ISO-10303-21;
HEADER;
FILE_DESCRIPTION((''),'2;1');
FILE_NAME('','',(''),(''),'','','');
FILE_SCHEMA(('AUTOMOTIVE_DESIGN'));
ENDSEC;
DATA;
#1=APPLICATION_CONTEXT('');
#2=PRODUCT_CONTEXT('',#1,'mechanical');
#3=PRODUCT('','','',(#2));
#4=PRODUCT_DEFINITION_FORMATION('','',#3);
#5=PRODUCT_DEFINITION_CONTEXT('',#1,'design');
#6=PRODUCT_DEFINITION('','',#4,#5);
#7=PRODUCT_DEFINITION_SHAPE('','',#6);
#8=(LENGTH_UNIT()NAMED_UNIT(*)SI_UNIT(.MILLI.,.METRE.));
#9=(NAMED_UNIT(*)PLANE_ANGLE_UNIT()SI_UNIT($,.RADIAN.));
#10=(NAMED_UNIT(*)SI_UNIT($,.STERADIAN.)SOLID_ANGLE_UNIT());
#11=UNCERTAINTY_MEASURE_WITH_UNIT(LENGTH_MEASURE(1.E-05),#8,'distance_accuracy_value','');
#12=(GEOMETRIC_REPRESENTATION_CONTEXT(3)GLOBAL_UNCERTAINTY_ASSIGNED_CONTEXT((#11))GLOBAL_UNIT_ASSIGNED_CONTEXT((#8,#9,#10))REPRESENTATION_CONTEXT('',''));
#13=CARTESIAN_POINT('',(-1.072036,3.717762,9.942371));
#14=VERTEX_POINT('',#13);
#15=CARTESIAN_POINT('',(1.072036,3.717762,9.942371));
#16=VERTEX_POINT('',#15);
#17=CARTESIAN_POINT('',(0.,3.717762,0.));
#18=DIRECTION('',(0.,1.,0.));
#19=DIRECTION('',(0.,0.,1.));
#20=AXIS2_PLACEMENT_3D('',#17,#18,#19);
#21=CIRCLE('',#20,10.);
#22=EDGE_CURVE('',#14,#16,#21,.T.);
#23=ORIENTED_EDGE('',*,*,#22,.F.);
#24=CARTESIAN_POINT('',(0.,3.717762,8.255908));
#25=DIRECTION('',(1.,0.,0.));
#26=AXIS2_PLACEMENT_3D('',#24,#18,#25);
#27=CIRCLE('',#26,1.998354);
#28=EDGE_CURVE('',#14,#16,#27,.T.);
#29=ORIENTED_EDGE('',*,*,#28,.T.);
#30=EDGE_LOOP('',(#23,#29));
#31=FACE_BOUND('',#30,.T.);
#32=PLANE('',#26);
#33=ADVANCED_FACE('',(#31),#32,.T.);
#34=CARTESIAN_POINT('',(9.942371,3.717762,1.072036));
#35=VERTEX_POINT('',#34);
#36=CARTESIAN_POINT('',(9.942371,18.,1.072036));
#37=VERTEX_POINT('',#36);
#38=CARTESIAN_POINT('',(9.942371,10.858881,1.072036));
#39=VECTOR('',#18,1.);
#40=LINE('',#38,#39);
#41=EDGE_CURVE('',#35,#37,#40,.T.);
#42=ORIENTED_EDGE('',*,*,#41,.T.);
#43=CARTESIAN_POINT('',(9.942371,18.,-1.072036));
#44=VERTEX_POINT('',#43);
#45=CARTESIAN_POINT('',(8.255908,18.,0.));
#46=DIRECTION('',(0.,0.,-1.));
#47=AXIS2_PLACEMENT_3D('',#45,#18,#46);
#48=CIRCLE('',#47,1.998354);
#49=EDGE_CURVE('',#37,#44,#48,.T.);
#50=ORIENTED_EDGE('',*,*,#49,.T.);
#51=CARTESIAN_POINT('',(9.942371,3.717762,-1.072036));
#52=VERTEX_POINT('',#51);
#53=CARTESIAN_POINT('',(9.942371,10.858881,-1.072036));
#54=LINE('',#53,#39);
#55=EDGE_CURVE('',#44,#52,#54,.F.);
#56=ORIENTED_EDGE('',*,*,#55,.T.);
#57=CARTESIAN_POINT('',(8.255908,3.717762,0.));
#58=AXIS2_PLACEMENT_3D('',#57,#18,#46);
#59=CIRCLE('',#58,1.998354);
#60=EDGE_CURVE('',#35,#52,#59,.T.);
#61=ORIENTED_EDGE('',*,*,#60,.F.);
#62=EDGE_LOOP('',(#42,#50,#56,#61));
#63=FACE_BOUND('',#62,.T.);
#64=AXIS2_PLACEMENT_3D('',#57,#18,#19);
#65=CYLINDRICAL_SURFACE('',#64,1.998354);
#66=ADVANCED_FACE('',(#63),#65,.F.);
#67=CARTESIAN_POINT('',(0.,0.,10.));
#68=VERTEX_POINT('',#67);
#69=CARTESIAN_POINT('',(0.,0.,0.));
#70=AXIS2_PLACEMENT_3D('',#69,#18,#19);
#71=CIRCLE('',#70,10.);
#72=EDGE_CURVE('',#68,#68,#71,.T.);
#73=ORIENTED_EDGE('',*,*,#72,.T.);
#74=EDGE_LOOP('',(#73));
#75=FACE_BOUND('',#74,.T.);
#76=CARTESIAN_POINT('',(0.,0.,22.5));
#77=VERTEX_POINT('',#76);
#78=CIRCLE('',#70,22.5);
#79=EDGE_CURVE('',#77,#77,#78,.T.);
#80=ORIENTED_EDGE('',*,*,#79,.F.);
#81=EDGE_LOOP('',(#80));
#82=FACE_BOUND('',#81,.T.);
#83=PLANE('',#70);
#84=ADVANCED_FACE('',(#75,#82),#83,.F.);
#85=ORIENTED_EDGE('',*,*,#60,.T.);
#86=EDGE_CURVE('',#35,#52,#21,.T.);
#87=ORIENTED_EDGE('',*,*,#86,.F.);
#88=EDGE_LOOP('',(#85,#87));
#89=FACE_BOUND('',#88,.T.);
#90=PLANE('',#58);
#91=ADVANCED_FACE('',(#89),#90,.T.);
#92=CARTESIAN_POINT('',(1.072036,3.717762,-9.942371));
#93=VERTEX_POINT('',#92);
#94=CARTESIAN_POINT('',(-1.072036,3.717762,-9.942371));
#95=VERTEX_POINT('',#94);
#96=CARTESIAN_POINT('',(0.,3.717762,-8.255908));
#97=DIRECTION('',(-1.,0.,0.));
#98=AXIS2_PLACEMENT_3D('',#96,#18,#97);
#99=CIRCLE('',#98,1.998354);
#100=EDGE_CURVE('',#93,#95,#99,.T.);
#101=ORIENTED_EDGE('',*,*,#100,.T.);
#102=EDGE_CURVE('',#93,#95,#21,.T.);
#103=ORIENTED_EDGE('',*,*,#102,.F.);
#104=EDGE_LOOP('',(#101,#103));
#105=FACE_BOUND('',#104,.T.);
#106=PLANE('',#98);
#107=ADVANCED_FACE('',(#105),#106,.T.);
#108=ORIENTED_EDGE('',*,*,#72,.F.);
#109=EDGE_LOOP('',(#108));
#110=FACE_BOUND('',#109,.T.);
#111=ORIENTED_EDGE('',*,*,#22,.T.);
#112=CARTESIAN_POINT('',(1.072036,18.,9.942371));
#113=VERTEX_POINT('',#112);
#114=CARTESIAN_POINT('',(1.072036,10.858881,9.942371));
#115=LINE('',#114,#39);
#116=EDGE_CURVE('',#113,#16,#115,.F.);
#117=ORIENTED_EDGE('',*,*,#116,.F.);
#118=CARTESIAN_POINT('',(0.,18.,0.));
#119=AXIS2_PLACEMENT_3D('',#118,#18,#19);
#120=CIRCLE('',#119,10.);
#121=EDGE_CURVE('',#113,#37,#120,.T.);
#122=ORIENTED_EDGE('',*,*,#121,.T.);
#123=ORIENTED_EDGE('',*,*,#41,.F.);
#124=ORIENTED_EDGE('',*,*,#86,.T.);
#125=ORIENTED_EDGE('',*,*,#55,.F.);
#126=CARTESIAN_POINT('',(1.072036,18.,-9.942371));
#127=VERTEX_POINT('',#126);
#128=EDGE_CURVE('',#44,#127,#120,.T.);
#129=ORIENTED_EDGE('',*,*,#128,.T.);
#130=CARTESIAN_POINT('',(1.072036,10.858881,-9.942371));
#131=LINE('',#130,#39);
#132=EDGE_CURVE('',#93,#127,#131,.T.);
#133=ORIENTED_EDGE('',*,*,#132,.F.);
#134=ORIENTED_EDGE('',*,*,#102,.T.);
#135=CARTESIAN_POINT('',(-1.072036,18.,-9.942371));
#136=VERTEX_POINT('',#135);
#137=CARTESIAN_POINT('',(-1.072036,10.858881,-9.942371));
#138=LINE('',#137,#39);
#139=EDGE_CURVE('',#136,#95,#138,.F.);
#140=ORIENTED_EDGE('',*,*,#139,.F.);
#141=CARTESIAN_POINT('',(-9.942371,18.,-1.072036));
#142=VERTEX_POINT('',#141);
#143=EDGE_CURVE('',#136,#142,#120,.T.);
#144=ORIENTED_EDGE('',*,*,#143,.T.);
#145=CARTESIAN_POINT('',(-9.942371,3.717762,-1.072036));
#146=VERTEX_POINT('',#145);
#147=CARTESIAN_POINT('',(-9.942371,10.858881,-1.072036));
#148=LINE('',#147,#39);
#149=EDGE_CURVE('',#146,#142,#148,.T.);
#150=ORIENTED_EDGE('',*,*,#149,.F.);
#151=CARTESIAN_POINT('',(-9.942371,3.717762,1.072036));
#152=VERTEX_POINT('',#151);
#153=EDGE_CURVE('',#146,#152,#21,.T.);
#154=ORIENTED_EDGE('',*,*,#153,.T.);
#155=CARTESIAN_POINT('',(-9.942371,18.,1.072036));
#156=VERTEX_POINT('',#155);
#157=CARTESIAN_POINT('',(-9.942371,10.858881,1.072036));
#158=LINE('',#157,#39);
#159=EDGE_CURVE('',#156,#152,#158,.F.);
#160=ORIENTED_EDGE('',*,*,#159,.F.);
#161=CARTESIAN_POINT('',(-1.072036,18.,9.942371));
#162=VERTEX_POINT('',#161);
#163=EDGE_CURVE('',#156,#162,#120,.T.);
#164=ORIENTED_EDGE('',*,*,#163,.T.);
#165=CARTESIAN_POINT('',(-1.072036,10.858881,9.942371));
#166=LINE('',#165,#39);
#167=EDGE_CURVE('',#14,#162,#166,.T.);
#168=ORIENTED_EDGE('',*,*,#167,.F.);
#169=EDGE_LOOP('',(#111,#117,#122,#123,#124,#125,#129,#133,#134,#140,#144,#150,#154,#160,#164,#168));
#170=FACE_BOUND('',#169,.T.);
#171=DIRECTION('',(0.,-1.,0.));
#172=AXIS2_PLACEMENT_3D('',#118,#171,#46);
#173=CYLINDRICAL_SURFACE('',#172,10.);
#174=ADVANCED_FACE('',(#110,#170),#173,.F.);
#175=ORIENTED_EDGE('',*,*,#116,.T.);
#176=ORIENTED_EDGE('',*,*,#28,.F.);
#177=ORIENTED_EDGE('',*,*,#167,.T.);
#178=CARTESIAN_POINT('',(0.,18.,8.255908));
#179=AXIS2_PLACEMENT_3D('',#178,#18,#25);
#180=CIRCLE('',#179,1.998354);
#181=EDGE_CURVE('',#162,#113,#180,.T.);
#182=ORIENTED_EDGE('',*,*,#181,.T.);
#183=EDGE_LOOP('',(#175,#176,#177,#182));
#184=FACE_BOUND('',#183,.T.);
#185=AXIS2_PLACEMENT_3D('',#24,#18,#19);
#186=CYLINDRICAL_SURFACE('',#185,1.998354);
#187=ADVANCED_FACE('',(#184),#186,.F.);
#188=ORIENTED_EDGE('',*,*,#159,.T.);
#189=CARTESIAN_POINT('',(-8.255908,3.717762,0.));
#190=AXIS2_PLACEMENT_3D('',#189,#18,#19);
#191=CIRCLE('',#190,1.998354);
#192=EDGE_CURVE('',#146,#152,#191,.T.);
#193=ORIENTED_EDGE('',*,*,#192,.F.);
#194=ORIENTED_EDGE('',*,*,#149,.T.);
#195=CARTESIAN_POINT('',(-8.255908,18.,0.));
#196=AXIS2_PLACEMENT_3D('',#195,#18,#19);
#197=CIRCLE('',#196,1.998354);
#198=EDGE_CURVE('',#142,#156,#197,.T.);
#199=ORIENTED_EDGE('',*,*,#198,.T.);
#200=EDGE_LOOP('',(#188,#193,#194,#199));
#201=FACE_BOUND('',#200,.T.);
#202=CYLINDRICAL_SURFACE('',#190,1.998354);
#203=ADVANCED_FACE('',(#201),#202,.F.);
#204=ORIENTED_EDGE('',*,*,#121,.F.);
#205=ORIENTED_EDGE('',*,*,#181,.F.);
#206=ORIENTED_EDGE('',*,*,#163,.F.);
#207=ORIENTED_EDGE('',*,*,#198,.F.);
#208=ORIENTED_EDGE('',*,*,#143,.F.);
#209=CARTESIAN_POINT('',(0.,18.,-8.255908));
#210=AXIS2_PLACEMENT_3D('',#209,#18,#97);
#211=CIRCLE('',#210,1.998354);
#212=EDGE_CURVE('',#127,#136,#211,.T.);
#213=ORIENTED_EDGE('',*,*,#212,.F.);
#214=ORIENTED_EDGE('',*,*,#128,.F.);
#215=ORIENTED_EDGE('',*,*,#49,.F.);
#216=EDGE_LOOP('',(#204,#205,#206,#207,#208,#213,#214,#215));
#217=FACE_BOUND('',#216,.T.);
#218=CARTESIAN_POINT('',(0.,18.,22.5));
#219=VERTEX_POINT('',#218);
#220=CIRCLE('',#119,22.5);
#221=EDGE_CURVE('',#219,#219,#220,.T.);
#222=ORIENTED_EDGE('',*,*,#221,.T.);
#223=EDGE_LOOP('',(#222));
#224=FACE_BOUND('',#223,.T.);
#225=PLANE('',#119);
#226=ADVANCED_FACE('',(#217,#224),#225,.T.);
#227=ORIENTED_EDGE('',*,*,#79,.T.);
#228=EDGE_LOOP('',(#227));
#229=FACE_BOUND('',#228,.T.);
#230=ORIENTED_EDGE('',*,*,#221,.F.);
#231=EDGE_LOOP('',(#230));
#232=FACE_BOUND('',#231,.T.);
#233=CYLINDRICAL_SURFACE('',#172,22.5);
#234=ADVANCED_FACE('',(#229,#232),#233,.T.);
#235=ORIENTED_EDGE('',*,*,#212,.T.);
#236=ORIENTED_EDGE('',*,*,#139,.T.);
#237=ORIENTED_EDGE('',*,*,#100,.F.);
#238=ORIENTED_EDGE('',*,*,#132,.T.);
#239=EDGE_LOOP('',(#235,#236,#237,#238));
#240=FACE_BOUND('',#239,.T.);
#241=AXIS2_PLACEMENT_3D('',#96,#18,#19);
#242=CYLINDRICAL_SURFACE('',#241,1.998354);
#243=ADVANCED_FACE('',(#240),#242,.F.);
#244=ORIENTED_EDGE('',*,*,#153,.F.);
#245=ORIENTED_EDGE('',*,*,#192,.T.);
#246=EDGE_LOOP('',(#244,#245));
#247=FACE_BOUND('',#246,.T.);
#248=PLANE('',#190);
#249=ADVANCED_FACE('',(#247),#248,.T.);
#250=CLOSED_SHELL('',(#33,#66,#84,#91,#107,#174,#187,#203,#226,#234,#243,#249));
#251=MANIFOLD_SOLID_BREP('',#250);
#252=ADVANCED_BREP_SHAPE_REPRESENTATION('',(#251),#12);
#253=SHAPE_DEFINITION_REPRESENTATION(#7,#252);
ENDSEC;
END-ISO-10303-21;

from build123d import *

# Parameters (mm, degrees)
SKETCH1_R           = 22.5
BOSS_EXTRUDE1_DEPTH = 18
SKETCH2_R           = 10
CUT_EXTRUDE1_DEPTH  = 37.558172821
SKETCH3_R           = 1.998354334
CUT_EXTRUDE2_DEPTH  = 14.282237727
CIRPATTERN1_COUNT   = 4


with BuildPart() as part:
    # Sketch1 → Boss-Extrude1 (new body)
    with BuildSketch(Plane(origin=(0, 0, 0), x_dir=(1, 0, 0), z_dir=(0, 1, 0))):
        Circle(SKETCH1_R)
    extrude(amount=BOSS_EXTRUDE1_DEPTH)

    # Sketch2 → Cut-Extrude1 (cut, through all)
    with BuildSketch(Plane(origin=(0, 0, 0), x_dir=(1, 0, 0), z_dir=(0, 1, 0))):
        Circle(SKETCH2_R)
    extrude(amount=CUT_EXTRUDE1_DEPTH, mode=Mode.SUBTRACT)

    # Sketch3 → Cut-Extrude2 (cut)
    with BuildSketch(Plane(origin=(0, 18, 0), x_dir=(1, 0, 0), z_dir=(0, 1, 0))):
        with Locations((-8.255907584, 0)):
            Circle(SKETCH3_R)
    cut_extrude2 = extrude(amount=-CUT_EXTRUDE2_DEPTH, mode=Mode.SUBTRACT)

    # CirPattern1: Cut-Extrude2 ×4 about axis
    cirpattern1_axis = Axis((0, 0, 0), (0, 1, 0))
    for i in range(1, CIRPATTERN1_COUNT):
        add(cut_extrude2.rotate(cirpattern1_axis, i * 360 / CIRPATTERN1_COUNT), mode=Mode.SUBTRACT)


solid = part.part
